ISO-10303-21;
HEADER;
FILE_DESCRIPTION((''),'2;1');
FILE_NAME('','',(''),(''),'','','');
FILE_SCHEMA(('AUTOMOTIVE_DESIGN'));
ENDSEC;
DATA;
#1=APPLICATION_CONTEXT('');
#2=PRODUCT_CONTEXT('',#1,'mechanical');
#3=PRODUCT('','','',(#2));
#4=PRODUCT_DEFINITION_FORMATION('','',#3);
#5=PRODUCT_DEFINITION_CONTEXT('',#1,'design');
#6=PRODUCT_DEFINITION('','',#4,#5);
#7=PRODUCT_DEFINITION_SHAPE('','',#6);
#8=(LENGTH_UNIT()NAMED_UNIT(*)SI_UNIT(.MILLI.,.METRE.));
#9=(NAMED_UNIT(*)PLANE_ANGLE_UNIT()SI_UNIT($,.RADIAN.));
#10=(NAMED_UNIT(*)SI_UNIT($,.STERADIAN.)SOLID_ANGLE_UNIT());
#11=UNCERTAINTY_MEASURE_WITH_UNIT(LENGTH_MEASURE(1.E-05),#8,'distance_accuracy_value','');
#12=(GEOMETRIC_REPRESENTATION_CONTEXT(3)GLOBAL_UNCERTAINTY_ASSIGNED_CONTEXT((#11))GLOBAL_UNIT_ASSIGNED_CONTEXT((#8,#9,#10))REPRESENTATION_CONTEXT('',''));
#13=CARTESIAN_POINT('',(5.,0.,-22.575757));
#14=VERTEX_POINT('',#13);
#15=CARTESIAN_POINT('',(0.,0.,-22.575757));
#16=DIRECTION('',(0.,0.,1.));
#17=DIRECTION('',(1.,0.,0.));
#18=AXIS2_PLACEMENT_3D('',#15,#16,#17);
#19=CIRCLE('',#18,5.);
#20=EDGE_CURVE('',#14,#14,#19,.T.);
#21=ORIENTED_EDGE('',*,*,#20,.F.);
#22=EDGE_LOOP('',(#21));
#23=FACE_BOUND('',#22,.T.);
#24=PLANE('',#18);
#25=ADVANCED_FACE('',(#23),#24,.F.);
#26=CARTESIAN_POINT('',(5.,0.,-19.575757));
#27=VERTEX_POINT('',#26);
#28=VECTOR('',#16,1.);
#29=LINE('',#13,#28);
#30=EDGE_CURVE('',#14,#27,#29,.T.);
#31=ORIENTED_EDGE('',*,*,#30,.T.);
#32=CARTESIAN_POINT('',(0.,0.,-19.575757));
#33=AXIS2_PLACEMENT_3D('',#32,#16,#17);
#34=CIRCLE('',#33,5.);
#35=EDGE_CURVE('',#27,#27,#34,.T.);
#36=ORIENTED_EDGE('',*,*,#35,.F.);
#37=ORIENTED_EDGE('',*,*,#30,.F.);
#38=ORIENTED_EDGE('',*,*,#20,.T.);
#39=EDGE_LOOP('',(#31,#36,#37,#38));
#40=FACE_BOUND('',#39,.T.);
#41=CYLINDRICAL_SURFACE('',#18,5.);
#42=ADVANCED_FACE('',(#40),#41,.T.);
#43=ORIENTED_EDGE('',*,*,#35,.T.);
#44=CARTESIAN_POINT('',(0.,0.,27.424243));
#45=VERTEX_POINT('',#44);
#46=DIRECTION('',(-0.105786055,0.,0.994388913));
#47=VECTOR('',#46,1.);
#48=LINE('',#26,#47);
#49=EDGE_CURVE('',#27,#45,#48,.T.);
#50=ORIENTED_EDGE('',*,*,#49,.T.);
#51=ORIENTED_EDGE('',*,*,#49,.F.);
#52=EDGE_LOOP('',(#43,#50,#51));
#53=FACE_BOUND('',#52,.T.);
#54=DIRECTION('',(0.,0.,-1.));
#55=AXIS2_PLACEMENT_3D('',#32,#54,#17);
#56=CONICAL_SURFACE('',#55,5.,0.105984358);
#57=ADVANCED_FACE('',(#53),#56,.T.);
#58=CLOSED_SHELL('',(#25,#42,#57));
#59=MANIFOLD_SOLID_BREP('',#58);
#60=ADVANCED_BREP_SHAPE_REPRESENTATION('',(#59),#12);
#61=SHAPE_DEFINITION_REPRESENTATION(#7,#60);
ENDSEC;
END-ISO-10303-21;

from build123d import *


# Not quite as in the source:
# - a feature of the source that left no trace in its solid (it failed there, or was rolled back) is left out
# - the program builds the solid bodies; features that only make, move or delete a surface that nothing else refers to are left out


with BuildPart() as f1:
    # F0 (on Front) → F1 (revolve)
    with BuildSketch(Plane.XZ):
        Polygon((5, -22.5757566782), (5, -19.5757566782), (0, 27.4242433218), (0, -22.5757566782), align=None)
    revolve(axis=Axis((0, 0, 2.4242433218), (0, 0, 1)))


solid = f1.part
